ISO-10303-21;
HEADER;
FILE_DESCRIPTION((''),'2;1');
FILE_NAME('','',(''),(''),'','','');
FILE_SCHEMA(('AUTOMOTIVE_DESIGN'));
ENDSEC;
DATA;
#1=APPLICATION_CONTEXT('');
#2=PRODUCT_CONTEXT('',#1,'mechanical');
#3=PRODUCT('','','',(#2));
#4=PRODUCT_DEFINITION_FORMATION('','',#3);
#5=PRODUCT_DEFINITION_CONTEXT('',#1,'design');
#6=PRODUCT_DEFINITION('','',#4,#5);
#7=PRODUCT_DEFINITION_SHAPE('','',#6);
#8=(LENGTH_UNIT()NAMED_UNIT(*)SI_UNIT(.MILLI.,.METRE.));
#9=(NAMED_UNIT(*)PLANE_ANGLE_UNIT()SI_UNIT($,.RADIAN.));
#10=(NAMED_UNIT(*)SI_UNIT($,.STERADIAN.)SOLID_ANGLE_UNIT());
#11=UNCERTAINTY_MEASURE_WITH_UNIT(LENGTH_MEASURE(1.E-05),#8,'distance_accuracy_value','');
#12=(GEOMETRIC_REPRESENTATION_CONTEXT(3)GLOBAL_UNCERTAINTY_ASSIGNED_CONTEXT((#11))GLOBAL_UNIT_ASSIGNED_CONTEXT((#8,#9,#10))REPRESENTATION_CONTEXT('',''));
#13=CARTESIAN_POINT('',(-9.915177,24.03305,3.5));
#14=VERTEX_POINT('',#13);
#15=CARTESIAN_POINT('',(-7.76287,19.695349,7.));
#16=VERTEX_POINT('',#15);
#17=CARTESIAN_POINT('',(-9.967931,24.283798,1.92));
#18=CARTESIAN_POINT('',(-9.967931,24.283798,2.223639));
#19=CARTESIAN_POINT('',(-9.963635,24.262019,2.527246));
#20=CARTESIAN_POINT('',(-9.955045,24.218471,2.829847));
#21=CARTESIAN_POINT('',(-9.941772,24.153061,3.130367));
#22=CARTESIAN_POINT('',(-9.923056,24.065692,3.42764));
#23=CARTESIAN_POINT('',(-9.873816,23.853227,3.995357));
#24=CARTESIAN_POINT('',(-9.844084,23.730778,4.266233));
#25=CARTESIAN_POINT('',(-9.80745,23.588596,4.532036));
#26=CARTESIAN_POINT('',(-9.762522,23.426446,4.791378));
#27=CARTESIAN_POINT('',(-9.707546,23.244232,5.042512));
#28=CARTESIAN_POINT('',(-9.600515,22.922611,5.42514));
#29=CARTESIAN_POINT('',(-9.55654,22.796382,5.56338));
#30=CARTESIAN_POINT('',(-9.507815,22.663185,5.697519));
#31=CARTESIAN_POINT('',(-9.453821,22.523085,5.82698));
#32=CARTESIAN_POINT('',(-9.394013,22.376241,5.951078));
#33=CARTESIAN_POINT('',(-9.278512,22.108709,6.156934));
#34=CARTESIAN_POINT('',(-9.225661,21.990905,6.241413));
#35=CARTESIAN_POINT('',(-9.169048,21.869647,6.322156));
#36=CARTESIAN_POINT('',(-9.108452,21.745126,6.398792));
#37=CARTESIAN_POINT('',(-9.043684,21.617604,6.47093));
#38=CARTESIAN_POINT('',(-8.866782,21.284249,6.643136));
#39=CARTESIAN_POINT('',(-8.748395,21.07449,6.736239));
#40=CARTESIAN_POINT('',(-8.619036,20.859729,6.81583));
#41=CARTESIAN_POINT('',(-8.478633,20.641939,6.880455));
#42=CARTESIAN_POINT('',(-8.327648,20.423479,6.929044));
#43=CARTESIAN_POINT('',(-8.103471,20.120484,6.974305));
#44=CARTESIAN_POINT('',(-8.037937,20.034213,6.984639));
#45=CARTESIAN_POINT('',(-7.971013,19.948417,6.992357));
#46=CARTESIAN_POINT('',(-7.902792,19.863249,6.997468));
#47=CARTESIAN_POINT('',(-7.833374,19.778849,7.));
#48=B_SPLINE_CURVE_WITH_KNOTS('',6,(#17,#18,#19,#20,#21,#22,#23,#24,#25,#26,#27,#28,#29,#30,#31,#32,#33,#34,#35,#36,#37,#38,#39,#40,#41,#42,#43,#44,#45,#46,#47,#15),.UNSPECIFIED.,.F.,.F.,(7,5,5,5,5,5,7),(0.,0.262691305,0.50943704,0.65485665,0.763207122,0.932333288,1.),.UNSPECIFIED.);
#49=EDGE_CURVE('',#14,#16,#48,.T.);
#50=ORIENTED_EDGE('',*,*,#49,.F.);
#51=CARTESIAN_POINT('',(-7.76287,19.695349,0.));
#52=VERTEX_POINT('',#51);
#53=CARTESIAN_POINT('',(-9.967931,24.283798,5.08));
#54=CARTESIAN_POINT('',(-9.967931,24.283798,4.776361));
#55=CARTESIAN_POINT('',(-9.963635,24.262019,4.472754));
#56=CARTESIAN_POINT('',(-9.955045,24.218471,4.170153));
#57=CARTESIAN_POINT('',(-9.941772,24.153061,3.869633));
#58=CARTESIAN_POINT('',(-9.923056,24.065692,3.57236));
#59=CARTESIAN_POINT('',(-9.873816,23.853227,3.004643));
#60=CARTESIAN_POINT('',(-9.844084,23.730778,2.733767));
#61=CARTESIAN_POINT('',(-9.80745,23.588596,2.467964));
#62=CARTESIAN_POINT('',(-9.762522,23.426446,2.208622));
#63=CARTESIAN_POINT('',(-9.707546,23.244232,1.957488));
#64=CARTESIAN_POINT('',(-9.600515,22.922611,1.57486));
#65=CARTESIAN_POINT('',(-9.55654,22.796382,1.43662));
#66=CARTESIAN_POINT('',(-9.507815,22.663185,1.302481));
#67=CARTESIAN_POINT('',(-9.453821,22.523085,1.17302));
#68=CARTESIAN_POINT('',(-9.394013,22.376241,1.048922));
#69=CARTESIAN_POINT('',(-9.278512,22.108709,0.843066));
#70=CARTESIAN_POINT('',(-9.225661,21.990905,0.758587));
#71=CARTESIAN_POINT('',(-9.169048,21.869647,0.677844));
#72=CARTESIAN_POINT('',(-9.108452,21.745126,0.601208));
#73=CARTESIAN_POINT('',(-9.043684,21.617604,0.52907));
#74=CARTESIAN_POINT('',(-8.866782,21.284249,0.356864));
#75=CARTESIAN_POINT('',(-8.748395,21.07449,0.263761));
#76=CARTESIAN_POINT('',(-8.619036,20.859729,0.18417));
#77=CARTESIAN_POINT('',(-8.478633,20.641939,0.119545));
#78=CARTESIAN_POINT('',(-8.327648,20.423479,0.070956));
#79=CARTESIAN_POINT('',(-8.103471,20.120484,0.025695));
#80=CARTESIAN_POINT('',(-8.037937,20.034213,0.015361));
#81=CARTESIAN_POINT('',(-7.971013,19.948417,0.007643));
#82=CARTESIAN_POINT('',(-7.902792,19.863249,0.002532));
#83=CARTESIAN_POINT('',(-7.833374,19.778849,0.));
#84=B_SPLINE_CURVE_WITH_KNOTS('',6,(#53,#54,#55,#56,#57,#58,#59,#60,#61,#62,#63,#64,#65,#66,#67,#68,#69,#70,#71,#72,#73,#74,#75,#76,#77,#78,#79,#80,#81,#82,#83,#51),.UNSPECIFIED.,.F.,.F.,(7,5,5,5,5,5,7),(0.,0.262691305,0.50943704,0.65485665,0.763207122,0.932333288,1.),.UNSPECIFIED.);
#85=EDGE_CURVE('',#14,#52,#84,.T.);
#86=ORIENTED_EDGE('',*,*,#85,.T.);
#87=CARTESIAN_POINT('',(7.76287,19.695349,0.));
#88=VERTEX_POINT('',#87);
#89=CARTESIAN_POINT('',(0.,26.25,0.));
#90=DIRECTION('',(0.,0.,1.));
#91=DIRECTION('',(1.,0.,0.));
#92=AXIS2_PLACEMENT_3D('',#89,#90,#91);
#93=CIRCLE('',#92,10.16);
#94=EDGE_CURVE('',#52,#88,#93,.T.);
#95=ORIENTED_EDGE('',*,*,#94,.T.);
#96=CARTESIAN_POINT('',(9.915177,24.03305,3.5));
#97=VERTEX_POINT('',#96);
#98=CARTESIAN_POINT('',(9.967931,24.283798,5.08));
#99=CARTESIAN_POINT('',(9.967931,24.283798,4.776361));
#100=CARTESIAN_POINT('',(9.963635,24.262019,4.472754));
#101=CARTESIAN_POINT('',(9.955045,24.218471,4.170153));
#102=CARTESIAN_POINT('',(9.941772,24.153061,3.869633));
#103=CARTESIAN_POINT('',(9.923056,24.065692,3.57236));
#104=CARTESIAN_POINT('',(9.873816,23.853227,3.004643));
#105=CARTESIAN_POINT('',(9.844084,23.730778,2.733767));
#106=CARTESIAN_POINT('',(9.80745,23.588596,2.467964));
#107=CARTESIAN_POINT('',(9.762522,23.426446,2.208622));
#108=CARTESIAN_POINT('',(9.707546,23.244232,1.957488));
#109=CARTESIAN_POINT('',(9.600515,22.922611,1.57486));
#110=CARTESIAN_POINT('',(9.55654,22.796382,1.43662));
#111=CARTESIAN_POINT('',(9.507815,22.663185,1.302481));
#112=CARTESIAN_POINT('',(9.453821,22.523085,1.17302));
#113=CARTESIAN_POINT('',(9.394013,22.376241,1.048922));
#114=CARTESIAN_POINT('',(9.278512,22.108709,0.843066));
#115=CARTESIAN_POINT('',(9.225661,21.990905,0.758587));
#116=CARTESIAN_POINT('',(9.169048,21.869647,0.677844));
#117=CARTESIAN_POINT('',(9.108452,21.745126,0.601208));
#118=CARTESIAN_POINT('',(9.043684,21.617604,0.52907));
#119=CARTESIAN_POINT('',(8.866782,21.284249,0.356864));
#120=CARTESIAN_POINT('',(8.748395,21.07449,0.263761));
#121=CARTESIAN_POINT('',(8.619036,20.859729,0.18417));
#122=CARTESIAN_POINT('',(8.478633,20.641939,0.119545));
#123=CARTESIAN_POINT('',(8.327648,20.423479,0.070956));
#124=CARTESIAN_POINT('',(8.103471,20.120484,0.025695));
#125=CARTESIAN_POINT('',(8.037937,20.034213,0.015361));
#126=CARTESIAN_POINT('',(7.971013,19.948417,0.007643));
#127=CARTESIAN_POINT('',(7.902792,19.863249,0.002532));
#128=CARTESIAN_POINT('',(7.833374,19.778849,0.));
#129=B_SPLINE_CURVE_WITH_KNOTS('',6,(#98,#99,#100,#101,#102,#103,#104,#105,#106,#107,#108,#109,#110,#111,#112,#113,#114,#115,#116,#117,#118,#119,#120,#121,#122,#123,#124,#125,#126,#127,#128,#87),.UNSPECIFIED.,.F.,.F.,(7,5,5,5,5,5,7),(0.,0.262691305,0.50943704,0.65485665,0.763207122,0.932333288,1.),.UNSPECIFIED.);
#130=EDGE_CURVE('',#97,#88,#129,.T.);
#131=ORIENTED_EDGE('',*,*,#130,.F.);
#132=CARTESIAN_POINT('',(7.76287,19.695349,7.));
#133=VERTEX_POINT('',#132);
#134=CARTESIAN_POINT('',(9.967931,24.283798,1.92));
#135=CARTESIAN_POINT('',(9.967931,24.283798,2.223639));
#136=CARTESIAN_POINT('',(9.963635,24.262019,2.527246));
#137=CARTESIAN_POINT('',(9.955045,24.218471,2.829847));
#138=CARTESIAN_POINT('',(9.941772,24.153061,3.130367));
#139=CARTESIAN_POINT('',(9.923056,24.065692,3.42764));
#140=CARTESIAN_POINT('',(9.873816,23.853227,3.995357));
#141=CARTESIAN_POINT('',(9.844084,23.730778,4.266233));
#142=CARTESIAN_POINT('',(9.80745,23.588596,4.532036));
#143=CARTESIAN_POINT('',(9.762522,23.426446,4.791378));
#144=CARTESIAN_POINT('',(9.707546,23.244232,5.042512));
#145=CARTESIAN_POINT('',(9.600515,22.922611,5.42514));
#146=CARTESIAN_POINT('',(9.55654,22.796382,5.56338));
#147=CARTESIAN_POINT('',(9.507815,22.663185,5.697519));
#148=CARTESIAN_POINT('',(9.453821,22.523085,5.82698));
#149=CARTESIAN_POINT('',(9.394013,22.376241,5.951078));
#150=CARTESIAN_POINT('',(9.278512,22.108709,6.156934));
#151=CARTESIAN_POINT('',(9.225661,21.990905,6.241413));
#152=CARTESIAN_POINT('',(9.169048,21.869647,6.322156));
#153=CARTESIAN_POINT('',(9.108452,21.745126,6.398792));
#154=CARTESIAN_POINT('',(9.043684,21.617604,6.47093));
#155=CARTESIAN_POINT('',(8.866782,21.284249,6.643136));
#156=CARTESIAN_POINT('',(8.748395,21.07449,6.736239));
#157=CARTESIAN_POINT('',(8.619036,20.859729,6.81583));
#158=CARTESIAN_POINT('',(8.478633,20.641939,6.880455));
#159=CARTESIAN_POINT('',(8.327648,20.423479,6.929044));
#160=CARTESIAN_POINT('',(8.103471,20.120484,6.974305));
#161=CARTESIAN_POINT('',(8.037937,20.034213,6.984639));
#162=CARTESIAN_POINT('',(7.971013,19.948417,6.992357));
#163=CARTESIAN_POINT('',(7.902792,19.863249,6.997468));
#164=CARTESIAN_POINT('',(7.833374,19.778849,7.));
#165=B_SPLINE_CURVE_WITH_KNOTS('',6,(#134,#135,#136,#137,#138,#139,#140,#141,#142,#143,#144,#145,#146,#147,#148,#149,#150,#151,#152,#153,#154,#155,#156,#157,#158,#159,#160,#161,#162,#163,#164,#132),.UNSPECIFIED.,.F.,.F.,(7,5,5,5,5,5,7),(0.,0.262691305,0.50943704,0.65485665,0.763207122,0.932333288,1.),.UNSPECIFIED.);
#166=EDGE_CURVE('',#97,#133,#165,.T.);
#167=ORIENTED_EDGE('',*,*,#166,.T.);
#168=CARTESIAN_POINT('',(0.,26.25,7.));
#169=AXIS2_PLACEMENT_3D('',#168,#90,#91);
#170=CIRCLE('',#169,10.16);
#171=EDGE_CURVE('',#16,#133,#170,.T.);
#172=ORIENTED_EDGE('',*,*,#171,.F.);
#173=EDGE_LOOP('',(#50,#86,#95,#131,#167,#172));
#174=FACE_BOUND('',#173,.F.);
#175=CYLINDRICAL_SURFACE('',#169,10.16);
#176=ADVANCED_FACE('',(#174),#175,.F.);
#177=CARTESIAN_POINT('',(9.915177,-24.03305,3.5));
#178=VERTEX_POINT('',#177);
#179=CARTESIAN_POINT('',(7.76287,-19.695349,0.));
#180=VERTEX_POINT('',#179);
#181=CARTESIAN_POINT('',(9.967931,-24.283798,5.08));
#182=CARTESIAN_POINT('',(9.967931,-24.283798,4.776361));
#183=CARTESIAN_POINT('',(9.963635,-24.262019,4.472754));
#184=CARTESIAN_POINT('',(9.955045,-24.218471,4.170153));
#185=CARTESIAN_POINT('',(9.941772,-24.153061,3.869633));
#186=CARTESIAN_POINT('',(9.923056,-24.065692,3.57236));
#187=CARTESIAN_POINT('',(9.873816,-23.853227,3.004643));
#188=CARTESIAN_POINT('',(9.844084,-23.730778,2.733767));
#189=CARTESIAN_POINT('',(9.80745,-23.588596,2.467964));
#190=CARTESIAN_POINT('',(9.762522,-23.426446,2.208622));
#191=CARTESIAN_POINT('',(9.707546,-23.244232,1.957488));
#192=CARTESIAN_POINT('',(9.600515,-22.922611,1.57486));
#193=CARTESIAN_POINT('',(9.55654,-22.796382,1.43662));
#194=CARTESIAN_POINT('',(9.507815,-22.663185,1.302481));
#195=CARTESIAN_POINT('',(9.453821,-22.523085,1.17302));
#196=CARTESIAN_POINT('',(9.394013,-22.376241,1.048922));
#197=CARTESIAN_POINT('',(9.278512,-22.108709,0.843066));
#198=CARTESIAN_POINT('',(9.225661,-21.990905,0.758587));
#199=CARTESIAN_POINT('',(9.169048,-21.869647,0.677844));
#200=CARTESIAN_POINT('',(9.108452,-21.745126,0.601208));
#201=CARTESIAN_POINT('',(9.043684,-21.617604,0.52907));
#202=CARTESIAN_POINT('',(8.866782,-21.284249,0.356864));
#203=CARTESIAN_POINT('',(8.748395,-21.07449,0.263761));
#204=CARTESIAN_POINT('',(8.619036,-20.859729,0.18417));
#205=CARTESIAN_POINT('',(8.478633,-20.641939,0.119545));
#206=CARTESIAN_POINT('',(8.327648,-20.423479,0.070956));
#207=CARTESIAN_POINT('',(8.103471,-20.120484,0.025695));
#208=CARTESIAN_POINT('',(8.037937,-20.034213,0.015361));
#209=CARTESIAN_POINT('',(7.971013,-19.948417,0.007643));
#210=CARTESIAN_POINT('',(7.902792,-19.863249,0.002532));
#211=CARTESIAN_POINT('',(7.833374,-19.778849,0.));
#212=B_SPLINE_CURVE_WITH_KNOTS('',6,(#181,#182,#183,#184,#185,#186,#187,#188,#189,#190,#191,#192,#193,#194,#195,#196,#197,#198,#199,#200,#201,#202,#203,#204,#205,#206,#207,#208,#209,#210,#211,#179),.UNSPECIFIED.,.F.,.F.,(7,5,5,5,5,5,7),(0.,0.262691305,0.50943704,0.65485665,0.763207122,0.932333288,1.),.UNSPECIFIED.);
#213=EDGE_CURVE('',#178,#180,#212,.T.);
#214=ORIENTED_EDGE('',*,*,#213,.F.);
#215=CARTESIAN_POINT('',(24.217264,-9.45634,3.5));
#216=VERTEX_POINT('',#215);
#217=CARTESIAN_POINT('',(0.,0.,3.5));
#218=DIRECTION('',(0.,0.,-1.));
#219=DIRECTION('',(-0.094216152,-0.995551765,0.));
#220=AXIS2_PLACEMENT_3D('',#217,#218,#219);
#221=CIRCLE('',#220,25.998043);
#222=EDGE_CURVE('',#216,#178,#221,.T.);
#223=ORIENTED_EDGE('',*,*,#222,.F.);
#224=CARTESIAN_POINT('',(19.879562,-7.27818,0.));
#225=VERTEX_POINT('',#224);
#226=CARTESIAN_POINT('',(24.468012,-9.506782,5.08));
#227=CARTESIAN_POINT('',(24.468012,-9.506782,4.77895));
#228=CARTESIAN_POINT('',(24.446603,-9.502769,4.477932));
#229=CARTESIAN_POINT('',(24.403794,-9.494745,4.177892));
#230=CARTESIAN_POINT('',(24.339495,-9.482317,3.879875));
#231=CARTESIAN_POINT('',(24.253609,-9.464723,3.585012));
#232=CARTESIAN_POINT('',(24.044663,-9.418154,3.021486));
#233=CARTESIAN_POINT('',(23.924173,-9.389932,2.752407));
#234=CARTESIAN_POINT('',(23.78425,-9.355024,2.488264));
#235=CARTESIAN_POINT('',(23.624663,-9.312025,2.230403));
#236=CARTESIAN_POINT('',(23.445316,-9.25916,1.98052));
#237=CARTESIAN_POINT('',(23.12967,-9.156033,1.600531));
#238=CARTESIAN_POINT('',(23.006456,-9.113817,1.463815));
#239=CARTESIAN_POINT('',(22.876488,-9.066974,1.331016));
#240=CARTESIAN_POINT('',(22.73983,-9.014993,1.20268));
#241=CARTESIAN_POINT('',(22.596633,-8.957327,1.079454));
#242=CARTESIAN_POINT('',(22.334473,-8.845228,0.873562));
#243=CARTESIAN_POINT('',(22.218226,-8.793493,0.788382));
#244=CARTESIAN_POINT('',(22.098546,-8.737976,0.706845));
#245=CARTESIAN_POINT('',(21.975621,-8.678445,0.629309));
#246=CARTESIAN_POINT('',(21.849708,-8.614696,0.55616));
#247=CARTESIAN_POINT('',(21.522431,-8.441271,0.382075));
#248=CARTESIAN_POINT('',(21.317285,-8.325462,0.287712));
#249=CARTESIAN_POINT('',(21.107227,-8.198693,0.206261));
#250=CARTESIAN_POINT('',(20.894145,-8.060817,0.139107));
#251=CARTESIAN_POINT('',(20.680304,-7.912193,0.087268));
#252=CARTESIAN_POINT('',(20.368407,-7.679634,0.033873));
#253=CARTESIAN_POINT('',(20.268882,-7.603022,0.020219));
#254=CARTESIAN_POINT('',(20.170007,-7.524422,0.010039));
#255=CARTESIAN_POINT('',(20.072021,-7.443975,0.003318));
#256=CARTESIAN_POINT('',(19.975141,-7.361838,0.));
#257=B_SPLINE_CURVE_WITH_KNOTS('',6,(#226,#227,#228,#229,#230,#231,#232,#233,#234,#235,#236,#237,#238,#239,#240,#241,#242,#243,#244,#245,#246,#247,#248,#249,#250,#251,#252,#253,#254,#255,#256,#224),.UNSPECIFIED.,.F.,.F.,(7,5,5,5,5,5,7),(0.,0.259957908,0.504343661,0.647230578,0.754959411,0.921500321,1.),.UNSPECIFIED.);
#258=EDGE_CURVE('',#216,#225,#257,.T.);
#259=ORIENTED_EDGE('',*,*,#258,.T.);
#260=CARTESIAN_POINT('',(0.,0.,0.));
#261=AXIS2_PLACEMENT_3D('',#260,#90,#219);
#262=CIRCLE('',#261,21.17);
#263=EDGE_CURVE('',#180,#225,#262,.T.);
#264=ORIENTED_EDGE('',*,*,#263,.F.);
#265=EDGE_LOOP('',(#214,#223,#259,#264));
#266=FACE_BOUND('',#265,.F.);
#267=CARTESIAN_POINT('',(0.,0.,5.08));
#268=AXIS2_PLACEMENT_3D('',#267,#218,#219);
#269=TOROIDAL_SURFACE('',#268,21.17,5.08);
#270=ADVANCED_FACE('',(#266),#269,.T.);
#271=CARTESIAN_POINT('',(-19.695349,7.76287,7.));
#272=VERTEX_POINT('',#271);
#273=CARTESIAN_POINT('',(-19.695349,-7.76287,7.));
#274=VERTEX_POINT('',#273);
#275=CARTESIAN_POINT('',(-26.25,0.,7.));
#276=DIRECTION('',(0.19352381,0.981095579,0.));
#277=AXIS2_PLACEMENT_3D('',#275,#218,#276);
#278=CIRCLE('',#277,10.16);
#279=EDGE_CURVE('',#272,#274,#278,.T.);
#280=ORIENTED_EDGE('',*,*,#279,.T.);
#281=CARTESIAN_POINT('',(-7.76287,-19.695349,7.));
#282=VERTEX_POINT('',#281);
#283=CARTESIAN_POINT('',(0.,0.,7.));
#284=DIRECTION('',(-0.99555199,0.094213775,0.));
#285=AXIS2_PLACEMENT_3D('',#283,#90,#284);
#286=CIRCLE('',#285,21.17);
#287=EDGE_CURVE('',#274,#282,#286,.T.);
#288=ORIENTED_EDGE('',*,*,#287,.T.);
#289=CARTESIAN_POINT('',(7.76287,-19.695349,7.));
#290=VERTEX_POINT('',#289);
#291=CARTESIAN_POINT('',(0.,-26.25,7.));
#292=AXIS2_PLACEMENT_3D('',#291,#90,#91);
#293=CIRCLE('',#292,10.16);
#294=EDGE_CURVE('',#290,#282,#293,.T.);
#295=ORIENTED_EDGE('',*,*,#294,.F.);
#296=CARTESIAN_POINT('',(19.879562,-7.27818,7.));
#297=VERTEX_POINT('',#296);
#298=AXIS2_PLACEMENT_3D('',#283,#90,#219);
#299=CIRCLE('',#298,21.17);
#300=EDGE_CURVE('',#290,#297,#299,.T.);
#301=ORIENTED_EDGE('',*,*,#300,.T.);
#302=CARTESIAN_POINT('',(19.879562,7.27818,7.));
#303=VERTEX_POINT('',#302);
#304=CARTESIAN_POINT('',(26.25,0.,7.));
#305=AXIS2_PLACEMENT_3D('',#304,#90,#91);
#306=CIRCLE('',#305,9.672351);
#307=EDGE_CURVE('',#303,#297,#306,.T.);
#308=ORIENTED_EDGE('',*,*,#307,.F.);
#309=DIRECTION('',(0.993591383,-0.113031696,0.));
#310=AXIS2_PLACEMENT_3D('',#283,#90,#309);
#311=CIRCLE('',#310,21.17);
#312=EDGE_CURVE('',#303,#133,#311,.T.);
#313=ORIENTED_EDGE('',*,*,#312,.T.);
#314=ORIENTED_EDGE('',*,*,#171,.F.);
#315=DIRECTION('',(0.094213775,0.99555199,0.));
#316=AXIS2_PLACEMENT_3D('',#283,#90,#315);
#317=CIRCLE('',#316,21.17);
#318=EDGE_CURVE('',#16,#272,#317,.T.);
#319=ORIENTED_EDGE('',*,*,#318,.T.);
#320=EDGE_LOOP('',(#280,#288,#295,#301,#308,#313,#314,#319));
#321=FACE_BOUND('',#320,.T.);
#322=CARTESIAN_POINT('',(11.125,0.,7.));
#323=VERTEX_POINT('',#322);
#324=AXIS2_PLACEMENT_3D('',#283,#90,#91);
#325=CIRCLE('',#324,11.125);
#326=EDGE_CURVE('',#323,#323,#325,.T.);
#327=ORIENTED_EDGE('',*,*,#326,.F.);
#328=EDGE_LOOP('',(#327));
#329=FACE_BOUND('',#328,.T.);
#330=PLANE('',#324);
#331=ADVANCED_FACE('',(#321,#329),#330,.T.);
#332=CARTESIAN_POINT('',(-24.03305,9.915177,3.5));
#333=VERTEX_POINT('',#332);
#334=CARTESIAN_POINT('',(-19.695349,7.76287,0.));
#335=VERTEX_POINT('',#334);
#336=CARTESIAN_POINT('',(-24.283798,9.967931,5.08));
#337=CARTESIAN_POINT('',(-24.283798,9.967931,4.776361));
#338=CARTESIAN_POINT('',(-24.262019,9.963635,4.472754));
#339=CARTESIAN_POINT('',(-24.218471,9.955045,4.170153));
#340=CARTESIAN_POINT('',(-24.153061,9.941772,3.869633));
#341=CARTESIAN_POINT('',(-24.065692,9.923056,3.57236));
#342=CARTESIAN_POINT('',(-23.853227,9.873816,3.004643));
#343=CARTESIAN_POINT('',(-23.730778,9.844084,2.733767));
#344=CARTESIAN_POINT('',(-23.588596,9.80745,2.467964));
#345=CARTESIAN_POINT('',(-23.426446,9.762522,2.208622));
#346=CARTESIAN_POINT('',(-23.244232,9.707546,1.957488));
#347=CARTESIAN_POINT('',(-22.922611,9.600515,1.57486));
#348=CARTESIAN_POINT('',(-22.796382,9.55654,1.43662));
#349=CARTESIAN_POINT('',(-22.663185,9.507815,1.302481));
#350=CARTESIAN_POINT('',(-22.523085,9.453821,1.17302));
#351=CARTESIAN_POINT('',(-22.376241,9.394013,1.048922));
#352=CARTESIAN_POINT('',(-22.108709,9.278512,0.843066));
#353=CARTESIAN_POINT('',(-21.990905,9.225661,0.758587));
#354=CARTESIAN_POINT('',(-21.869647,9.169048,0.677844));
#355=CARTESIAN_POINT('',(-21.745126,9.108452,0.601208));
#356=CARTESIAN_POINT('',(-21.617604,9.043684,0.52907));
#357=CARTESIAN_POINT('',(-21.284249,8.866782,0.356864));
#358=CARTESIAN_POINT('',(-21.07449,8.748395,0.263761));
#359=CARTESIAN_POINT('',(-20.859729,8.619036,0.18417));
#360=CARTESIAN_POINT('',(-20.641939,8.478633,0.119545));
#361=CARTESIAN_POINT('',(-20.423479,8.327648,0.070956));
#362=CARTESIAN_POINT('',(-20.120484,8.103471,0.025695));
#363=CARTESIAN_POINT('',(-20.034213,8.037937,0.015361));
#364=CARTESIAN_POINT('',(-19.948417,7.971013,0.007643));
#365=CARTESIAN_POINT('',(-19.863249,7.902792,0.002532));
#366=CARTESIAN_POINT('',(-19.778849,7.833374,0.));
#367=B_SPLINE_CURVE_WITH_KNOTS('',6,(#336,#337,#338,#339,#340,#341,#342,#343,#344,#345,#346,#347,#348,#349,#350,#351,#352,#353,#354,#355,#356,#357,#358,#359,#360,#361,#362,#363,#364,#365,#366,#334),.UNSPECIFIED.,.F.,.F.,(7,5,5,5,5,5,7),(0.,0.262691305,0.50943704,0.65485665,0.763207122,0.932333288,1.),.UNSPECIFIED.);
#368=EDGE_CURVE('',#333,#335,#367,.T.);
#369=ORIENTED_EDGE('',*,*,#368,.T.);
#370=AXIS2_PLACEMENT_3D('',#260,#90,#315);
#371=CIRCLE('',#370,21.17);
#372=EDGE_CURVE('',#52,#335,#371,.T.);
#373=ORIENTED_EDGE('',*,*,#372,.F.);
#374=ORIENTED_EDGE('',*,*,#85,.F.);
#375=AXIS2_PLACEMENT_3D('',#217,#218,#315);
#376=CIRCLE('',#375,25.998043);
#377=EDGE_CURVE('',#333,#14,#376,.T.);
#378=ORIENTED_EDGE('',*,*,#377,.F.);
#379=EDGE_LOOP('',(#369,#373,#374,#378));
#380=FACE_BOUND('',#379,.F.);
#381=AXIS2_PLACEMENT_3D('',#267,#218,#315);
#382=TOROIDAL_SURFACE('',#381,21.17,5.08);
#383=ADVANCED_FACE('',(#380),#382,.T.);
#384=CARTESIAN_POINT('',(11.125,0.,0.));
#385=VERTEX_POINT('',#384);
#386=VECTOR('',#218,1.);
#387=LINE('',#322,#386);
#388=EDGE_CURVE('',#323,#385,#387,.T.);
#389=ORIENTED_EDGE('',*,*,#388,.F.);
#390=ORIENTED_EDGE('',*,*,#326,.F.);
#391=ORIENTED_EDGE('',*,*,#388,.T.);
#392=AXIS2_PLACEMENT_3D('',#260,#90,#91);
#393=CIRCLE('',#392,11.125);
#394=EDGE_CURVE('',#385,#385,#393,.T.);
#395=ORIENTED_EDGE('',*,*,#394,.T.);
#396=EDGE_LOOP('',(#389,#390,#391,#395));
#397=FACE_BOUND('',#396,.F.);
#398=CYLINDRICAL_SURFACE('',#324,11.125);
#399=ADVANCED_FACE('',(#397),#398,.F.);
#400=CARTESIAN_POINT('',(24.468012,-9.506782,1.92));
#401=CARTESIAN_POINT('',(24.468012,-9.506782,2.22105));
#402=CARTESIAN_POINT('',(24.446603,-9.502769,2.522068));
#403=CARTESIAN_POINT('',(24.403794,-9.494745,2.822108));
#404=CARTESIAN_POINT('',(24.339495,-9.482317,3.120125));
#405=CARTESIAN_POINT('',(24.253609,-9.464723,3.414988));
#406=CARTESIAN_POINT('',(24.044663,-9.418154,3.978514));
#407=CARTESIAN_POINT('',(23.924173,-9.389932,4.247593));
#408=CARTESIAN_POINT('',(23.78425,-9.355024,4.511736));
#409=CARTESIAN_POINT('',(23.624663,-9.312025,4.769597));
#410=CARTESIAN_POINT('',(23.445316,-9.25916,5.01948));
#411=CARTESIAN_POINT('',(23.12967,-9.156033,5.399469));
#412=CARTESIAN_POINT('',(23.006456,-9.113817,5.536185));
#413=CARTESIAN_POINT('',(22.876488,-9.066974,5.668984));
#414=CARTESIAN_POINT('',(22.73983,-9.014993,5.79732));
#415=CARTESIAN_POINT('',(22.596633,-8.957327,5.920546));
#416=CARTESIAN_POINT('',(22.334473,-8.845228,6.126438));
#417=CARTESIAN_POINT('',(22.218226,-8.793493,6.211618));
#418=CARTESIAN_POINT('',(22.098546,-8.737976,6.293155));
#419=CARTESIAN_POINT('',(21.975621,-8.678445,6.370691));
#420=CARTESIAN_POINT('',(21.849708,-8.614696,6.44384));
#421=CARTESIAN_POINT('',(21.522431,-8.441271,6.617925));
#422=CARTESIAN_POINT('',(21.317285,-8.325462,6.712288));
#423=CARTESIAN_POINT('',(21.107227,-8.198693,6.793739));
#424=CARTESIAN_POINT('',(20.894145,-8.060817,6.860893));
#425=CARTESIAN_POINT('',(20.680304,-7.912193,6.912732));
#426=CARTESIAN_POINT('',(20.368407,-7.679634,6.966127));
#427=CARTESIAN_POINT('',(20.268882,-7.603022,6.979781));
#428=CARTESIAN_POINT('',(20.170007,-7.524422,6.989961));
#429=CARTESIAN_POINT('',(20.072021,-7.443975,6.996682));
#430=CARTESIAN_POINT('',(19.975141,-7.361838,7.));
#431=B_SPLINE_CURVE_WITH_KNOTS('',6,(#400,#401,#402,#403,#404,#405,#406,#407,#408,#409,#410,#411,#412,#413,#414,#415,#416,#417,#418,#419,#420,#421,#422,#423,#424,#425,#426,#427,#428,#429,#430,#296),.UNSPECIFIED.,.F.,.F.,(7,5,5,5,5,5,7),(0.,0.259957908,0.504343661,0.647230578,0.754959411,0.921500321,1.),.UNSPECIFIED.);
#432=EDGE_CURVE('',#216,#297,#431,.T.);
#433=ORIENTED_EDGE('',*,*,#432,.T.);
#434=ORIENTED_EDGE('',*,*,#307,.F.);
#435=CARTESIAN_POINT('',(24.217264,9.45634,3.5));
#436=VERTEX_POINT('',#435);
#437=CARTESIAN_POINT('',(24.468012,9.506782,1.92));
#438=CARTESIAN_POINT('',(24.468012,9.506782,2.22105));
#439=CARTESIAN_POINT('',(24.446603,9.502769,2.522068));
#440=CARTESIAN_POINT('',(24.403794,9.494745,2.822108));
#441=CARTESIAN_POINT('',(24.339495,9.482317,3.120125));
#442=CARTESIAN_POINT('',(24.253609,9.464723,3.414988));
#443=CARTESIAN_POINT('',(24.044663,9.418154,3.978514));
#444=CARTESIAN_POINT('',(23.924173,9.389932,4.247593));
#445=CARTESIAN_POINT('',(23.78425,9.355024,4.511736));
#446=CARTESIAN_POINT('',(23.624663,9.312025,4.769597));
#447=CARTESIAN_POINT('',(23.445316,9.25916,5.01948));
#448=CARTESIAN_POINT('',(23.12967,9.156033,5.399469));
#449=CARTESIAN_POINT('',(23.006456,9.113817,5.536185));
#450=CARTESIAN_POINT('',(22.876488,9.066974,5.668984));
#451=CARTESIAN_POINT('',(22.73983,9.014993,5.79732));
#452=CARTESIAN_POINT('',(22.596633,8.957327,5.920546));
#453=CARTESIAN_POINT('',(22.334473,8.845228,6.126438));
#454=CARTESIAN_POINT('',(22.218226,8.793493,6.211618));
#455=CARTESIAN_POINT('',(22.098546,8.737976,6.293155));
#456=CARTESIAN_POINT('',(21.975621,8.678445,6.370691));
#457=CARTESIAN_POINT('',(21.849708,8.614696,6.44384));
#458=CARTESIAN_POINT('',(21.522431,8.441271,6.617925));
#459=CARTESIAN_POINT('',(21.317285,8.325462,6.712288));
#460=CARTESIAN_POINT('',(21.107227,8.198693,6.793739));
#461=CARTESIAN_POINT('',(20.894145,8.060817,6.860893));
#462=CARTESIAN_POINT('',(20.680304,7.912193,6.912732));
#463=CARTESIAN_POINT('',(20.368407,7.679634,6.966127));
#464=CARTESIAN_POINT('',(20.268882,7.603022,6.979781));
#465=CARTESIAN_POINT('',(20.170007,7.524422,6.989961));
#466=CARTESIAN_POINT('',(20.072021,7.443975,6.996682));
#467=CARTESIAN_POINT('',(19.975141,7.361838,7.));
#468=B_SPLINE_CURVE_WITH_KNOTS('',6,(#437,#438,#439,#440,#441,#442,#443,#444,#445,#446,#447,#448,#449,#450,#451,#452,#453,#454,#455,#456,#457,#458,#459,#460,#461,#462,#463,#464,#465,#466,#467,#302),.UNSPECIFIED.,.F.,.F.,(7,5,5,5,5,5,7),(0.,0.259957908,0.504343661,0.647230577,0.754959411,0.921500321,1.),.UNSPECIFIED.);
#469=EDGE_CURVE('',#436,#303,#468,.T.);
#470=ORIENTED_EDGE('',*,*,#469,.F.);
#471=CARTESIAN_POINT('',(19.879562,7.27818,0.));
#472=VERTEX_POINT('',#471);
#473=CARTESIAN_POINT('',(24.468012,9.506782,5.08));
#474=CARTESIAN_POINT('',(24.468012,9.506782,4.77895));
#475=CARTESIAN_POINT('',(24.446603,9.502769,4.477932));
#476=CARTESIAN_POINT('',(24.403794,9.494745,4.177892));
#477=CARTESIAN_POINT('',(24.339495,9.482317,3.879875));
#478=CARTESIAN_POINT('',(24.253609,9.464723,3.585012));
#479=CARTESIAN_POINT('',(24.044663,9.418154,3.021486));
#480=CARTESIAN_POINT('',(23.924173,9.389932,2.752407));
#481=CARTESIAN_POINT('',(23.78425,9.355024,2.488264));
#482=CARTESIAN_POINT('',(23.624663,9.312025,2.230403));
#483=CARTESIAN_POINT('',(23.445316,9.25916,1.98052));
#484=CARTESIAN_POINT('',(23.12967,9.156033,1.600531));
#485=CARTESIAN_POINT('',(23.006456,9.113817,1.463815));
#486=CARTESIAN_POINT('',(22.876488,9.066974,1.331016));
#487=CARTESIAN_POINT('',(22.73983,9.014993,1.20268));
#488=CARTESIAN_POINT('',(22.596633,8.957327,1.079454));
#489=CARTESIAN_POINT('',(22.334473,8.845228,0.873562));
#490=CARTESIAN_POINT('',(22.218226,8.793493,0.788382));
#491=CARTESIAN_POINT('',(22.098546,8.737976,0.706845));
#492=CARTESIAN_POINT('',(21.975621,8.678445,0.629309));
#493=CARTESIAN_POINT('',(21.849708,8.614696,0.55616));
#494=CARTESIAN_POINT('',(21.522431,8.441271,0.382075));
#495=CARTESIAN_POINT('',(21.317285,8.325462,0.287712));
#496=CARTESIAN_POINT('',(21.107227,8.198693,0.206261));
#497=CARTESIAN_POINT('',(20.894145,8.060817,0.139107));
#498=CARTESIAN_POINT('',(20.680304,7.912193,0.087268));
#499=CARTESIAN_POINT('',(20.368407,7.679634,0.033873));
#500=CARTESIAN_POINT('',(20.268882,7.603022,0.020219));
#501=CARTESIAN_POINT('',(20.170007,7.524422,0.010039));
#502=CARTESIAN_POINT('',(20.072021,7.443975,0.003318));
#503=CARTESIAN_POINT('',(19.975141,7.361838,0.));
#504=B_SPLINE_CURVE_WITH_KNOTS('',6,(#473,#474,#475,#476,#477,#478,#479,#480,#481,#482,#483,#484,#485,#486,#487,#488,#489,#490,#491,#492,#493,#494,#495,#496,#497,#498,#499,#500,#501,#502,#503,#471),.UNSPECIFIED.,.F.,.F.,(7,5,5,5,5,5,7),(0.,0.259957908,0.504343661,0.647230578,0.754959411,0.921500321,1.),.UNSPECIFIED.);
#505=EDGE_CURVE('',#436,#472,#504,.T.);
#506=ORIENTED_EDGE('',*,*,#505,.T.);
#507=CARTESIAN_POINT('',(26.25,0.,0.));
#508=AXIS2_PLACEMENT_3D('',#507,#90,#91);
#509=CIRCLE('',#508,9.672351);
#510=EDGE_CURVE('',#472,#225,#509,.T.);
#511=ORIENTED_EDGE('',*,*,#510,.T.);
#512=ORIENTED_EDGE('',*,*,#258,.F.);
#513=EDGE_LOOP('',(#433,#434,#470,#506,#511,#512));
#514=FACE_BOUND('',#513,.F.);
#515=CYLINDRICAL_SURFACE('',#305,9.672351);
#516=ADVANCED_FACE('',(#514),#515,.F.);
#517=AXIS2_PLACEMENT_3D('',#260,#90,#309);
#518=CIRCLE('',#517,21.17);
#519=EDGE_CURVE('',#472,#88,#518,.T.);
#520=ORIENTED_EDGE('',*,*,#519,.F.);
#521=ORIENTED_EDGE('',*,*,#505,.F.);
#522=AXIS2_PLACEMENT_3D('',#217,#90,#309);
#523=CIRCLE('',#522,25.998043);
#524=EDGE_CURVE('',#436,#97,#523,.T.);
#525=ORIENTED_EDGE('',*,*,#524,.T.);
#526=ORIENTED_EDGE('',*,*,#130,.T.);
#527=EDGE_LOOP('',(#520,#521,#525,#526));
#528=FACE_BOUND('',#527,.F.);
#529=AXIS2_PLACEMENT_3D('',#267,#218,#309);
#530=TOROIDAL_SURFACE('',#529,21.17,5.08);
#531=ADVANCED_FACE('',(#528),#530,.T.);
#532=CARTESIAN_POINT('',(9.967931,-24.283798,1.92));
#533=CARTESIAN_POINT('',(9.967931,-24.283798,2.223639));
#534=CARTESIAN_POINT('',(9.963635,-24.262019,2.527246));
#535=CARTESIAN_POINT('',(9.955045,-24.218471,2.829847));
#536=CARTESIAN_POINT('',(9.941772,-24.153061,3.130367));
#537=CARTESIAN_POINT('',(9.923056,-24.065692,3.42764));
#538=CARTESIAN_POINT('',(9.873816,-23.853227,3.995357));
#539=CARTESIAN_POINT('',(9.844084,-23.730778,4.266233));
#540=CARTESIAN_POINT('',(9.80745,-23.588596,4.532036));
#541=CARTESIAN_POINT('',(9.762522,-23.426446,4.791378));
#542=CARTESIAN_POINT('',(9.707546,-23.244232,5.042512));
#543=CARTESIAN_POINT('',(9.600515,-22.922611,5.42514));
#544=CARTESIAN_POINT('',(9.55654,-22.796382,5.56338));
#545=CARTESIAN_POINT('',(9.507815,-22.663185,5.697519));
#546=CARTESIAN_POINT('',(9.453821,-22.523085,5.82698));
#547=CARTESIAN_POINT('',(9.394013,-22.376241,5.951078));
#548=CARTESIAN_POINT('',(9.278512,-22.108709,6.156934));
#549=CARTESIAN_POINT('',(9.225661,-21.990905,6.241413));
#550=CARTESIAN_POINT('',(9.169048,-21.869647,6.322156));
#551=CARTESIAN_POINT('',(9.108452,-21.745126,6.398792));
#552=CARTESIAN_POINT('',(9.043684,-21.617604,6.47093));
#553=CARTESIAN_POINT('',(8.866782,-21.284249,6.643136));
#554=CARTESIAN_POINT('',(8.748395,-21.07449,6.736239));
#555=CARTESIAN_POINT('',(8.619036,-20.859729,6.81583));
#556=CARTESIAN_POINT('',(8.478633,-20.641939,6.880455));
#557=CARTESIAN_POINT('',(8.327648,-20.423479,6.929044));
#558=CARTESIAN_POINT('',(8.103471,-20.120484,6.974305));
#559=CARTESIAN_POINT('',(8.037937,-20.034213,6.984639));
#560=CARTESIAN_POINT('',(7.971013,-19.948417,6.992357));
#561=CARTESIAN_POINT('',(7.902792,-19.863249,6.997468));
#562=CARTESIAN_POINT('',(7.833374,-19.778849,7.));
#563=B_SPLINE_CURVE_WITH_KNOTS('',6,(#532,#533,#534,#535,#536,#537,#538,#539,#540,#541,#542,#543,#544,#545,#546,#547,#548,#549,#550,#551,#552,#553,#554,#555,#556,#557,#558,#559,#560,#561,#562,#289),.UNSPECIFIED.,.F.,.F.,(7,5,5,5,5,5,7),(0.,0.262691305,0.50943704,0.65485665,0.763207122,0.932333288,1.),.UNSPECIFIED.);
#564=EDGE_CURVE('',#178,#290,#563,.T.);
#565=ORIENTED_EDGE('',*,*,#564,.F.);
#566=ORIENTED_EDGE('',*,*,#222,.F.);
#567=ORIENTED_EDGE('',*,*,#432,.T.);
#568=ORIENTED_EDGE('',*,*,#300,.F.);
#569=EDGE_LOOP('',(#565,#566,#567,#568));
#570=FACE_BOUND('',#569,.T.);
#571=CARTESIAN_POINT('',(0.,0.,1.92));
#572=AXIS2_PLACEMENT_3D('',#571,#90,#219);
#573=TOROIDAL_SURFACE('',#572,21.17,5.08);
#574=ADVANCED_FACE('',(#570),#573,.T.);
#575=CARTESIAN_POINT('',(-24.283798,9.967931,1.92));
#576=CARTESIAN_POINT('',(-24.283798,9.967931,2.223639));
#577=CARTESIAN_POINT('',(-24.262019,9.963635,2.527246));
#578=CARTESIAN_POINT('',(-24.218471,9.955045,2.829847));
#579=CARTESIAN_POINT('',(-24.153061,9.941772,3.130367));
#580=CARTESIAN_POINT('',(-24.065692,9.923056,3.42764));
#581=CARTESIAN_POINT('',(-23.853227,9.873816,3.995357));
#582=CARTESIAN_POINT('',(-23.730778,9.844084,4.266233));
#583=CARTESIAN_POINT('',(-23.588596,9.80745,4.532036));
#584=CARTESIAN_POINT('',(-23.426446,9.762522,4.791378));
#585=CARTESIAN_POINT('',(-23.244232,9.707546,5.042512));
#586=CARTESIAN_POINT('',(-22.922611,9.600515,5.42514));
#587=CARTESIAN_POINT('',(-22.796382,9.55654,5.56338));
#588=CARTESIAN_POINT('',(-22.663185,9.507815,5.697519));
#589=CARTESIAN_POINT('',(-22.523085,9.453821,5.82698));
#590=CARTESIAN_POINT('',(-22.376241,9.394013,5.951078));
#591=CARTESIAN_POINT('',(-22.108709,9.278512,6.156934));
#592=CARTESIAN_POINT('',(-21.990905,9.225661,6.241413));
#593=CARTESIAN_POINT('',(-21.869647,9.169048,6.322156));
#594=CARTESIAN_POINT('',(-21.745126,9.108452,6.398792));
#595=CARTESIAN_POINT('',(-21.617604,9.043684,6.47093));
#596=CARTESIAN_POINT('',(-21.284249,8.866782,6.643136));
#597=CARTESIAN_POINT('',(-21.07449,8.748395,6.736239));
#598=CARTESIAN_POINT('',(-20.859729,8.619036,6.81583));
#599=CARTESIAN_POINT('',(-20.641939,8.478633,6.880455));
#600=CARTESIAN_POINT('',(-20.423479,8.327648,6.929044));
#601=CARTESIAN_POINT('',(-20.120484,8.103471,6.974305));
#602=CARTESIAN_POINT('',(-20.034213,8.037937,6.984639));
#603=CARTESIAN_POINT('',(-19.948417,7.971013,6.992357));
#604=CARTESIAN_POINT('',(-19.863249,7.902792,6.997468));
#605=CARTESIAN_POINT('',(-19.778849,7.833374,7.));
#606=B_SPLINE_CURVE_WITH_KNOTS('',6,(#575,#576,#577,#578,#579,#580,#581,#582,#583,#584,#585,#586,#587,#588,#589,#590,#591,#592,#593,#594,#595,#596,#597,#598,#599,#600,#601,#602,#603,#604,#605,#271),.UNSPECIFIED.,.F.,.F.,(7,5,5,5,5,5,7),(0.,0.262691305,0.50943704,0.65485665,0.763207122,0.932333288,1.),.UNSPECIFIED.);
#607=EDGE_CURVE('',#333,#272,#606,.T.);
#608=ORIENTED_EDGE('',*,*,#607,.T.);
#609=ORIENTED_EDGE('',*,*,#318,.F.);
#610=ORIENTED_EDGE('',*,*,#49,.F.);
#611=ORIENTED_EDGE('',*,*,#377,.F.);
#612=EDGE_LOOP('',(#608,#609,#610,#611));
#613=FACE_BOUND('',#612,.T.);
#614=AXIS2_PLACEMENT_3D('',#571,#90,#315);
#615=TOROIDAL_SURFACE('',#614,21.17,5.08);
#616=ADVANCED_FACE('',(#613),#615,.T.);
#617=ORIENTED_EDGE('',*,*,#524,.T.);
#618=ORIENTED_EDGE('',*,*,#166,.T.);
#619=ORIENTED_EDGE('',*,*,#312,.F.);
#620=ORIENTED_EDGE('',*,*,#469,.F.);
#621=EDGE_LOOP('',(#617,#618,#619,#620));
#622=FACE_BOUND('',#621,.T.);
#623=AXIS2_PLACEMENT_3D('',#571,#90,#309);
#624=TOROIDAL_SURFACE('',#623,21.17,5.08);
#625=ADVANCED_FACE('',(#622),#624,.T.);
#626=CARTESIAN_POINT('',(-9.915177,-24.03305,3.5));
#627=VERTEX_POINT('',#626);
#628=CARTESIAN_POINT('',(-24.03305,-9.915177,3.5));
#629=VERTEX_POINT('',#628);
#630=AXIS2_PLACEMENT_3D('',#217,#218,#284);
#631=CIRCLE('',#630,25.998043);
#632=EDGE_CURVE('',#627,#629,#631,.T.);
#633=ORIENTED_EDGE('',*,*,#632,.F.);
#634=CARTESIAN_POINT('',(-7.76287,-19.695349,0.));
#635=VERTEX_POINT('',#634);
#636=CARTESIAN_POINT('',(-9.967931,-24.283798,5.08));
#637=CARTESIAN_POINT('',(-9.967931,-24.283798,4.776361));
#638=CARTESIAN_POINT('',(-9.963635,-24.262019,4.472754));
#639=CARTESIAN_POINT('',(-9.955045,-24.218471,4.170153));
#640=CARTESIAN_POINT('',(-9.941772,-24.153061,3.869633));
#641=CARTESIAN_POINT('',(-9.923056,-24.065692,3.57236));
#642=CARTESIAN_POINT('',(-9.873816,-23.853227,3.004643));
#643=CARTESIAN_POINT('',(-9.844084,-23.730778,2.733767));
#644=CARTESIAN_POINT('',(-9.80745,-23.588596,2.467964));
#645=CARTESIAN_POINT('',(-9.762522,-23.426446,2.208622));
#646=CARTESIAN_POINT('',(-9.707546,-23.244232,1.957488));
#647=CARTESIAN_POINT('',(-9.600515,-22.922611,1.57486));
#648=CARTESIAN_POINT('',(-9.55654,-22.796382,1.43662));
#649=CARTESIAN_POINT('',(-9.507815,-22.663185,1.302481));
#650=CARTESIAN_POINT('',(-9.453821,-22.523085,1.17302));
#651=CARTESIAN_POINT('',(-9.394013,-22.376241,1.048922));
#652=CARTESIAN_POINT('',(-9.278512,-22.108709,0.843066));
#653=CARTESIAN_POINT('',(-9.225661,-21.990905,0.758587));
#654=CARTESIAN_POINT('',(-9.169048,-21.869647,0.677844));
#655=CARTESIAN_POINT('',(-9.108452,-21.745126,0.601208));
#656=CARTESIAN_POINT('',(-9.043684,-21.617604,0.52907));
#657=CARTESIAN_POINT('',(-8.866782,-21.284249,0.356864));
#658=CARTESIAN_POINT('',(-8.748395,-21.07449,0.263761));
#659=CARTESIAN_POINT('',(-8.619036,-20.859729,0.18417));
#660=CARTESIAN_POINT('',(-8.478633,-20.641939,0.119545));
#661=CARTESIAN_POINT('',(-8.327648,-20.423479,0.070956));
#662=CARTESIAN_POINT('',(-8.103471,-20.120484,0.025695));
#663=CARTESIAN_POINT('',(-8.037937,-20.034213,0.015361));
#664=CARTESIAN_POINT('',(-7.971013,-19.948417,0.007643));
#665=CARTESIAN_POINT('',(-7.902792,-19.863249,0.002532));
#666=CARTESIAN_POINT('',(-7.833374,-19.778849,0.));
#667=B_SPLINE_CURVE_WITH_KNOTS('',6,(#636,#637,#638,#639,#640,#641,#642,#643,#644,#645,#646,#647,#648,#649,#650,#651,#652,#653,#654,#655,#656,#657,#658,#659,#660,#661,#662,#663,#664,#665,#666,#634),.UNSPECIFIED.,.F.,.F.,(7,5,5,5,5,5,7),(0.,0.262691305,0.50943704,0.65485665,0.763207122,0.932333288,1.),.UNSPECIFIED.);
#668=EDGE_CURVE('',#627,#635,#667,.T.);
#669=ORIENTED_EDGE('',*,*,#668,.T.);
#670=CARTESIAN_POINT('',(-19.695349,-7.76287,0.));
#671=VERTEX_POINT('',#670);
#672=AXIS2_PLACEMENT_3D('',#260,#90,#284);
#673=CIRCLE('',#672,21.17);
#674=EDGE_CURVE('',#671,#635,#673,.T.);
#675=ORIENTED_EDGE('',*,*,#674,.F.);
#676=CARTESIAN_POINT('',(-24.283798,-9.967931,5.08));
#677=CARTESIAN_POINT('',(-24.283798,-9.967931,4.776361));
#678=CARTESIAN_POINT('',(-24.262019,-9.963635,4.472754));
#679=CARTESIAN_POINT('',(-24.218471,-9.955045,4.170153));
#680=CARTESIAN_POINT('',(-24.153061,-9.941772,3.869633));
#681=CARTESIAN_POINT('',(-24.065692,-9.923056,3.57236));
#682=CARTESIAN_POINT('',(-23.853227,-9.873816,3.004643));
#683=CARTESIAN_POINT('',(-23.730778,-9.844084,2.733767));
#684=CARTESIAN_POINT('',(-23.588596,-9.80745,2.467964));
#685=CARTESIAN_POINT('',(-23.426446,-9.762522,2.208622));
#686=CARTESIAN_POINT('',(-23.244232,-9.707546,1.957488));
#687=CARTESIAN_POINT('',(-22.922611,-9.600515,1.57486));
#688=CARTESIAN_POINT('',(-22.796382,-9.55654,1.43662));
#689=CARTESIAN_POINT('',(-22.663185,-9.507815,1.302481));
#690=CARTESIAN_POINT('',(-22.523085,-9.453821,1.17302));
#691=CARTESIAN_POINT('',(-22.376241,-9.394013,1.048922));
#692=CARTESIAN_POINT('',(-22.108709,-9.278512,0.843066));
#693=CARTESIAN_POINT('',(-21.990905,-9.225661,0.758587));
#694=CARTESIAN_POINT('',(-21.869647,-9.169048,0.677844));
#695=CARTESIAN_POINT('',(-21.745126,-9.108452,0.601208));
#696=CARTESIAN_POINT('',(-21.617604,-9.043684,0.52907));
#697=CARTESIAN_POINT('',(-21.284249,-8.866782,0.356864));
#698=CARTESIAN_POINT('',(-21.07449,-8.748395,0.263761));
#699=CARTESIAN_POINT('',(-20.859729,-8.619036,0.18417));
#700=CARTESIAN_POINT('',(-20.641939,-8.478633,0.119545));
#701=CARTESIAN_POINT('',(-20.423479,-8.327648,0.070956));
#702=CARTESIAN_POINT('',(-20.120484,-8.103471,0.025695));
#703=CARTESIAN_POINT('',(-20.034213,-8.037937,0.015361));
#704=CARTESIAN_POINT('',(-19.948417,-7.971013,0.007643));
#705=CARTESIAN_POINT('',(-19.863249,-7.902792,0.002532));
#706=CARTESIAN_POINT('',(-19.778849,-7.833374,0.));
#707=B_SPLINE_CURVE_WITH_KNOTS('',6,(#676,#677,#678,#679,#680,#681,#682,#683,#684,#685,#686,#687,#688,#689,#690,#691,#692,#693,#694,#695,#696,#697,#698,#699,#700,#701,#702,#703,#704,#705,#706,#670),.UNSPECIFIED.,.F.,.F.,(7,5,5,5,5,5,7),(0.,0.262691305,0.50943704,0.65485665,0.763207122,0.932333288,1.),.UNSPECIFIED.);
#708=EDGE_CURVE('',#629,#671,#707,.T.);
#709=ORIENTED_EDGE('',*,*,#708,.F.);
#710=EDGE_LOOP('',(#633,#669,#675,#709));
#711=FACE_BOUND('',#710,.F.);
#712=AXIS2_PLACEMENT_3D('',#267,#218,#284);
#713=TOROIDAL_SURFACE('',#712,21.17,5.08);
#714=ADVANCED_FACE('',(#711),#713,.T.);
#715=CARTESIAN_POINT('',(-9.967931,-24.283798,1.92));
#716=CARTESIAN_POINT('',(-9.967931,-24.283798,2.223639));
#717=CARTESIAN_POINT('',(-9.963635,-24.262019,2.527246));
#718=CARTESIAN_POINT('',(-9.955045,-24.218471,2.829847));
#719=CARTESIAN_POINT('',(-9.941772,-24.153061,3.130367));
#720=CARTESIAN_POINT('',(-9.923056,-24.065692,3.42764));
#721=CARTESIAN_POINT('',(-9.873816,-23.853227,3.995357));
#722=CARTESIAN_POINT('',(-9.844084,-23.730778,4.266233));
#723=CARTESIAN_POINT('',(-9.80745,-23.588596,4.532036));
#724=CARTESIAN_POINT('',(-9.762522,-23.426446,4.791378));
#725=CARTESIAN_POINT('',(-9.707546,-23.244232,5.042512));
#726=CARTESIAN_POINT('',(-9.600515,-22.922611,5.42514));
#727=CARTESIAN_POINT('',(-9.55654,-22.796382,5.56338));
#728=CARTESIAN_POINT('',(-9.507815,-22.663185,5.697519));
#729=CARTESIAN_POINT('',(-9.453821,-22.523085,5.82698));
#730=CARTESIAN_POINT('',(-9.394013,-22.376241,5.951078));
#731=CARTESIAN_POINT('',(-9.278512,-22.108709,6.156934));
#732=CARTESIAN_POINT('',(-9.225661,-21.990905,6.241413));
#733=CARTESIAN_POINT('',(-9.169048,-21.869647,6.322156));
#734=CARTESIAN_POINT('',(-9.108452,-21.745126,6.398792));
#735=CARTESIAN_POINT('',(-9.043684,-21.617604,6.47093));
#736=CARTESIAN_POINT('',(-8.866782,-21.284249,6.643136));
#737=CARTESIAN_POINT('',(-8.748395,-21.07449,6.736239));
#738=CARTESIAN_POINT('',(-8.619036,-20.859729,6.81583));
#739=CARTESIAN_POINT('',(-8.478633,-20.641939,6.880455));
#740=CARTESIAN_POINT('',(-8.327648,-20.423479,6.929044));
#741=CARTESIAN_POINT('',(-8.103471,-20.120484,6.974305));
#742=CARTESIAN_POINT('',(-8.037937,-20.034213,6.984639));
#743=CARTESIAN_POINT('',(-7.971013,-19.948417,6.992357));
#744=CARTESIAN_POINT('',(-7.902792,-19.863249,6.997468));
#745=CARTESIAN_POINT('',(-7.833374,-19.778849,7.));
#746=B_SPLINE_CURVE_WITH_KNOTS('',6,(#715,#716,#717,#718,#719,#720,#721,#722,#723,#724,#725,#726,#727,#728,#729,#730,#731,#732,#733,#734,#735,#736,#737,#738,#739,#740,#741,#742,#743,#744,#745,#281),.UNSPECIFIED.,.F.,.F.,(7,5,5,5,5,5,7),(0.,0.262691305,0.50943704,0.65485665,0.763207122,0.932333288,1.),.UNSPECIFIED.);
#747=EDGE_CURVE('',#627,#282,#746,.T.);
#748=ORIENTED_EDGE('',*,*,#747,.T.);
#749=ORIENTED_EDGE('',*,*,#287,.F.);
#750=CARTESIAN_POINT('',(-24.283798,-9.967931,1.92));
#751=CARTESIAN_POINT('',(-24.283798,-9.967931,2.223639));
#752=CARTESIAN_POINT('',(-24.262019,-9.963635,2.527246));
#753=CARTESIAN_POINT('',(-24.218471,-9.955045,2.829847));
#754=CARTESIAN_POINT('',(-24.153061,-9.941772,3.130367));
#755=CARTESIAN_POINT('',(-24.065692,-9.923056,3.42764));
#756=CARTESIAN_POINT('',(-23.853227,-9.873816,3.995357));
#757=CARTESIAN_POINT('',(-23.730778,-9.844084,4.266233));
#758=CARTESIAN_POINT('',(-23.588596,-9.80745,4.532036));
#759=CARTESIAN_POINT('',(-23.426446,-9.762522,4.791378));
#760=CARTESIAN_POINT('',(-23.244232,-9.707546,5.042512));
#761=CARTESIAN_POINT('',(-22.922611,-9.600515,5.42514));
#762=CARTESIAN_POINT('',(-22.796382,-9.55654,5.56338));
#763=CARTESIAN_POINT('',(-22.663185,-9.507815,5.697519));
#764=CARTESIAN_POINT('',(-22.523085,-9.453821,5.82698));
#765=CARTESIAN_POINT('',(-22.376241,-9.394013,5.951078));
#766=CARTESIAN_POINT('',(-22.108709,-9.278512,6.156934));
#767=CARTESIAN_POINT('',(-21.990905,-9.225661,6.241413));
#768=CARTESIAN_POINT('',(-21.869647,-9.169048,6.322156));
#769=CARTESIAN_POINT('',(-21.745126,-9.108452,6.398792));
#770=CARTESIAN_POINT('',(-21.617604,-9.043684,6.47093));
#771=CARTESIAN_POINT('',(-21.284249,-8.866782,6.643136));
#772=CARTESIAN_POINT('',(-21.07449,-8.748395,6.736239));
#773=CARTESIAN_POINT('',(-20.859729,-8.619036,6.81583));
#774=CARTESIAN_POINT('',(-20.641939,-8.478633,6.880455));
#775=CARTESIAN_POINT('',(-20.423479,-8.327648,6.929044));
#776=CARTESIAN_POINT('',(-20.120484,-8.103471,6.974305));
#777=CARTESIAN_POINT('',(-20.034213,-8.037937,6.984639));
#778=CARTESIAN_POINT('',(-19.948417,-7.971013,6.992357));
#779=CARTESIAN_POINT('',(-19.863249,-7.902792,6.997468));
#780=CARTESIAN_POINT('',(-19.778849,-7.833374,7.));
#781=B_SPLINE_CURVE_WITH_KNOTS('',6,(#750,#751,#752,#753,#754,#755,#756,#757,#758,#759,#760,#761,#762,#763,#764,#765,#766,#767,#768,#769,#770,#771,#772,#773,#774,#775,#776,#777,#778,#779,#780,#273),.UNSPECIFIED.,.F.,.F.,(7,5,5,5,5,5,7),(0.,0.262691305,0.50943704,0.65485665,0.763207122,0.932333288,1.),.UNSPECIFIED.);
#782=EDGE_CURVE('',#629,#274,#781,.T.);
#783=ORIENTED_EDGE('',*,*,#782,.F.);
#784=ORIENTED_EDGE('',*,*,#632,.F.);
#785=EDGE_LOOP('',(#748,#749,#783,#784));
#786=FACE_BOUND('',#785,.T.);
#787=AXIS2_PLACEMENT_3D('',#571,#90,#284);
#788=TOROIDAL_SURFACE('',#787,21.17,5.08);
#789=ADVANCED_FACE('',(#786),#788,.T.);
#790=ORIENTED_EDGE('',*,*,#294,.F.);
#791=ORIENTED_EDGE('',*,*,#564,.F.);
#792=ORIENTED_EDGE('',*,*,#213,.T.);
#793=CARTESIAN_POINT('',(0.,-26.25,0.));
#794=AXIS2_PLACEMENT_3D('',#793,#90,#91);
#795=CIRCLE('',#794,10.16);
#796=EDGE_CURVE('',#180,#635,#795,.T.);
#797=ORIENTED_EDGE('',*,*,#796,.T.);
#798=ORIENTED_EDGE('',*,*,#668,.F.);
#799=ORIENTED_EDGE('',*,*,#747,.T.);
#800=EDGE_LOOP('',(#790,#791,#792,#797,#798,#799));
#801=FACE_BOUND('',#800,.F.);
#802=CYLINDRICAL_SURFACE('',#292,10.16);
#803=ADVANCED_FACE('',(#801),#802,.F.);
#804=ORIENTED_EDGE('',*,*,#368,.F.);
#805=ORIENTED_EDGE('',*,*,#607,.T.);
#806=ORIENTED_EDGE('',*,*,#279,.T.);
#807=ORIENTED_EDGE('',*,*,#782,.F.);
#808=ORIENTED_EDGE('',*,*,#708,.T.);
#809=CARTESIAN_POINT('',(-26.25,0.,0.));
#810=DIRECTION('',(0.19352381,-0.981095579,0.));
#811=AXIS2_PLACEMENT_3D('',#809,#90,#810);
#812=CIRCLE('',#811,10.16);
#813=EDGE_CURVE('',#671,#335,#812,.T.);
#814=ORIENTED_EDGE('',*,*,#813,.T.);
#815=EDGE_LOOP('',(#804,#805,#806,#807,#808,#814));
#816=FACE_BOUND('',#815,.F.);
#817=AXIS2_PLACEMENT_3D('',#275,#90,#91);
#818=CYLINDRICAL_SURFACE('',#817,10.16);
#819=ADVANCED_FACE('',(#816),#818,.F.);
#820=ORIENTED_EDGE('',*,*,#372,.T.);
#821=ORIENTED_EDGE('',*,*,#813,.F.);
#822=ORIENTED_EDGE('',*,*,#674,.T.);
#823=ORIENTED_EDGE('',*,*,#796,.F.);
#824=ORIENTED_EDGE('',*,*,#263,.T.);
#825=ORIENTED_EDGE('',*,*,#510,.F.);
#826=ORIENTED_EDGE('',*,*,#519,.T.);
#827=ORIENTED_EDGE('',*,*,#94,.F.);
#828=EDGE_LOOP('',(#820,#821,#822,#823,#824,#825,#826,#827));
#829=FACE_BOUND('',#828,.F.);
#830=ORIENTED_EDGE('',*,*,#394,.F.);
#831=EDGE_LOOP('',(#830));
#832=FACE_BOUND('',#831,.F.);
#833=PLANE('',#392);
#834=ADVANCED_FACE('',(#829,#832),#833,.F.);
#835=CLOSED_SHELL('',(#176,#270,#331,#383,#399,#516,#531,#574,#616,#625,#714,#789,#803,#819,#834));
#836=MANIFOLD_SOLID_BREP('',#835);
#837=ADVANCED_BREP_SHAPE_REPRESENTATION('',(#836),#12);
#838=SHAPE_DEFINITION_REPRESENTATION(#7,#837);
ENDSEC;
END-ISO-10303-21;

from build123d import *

# Parameters (mm, degrees)
F0_R         = 26.25
F1_DEPTH     = 7
F2_R         = 11.125
F3_DEPTH     = 25.4
F4_R         = 10.16
F4_R_2       = 9.6723514766
F5_DEPTH     = 25.4
F6_T2_ANGLE  = 101.8963155292
F6_T4_ANGLE  = 100.8121389037
F6_T6_ANGLE  = 100.8121389037
F6_T8_ANGLE  = 100.8121389037
F6_T10_ANGLE = 100.8121389037
F6_T12_ANGLE = 101.8963155292
F6_T14_ANGLE = 101.8963155292
F6_T16_ANGLE = 101.8963155292


# Not quite as in the source:
# - a fillet or chamfer that OpenCascade refuses, or shapes differently, is made with other operations: its cross-section is extruded or revolved along the edge and cut away or added


with BuildPart() as f1:
    # F0 (on Top) → F1 (new body)
    with BuildSketch(Plane.XY):
        Circle(F0_R)
    extrude(amount=F1_DEPTH)

    # F2 (on face) → F3 (cut)
    with BuildSketch(Plane.XY.offset(7)):
        Circle(F2_R)
    extrude(amount=-F3_DEPTH, mode=Mode.SUBTRACT)

    # F4 (on face) → F5 (cut)
    with BuildSketch(Plane.XY.offset(7)):
        with Locations((0, -26.25)):
            Circle(F4_R)
        with Locations((-26.25, 0)):
            Circle(F4_R)
        with Locations((0, 26.25)):
            Circle(F4_R)
        with Locations((26.25, 0)):
            Circle(F4_R_2)
    extrude(amount=-F5_DEPTH, mode=Mode.SUBTRACT)

    # F6: fillet of radius 5.08 on 8 edges, made by hand

    # F6_s1 → F6_t2 (revolve, cut)
    with BuildSketch(Plane(origin=(0, 0, 0), x_dir=(0, 0, 1), z_dir=(-0.995551765, 0.0942161515, 0))):
        with BuildLine():
            ThreePointArc((5.08, -26.25), (1.4878975516, -24.7621024484), (0, -21.17))
            Line((0, -21.17), (0, -26.25))
            Line((0, -26.25), (5.08, -26.25))
        make_face()
    revolve(axis=Axis((0, 0, 0), (0, 0, 1)), revolution_arc=F6_T2_ANGLE, mode=Mode.SUBTRACT)

    # F6_s3 → F6_t4 (revolve, cut)
    with BuildSketch(Plane(origin=(0, 0, 0), x_dir=(0, 0, 1), z_dir=(0.0942137746, 0.9955519899, 0))):
        with BuildLine():
            ThreePointArc((5.08, -26.25), (1.4878975516, -24.7621024484), (0, -21.17))
            Line((0, -21.17), (0, -26.25))
            Line((0, -26.25), (5.08, -26.25))
        make_face()
    revolve(axis=Axis((0, 0, 0), (0, 0, 1)), revolution_arc=F6_T4_ANGLE, mode=Mode.SUBTRACT)

    # F6_s5 → F6_t6 (revolve, cut)
    with BuildSketch(Plane(origin=(0, 0, 0), x_dir=(0, 0, 1), z_dir=(0.9955519899, -0.0942137746, 0))):
        with BuildLine():
            ThreePointArc((5.08, -26.25), (1.4878975516, -24.7621024484), (0, -21.17))
            Line((0, -21.17), (0, -26.25))
            Line((0, -26.25), (5.08, -26.25))
        make_face()
    revolve(axis=Axis((0, 0, 0), (0, 0, 1)), revolution_arc=F6_T6_ANGLE, mode=Mode.SUBTRACT)

    # F6_s7 → F6_t8 (revolve, cut)
    with BuildSketch(Plane(origin=(0, 0, 0), x_dir=(0, 0, 1), z_dir=(0.9955519899, -0.0942137746, 0))):
        with BuildLine():
            ThreePointArc((1.92, -26.25), (5.5121024484, -24.7621024484), (7, -21.17))
            Line((7, -21.17), (7, -26.25))
            Line((7, -26.25), (1.92, -26.25))
        make_face()
    revolve(axis=Axis((0, 0, 7), (0, 0, 1)), revolution_arc=F6_T8_ANGLE, mode=Mode.SUBTRACT)

    # F6_s9 → F6_t10 (revolve, cut)
    with BuildSketch(Plane(origin=(0, 0, 0), x_dir=(0, 0, 1), z_dir=(0.0942137746, 0.9955519899, 0))):
        with BuildLine():
            ThreePointArc((1.92, -26.25), (5.5121024484, -24.7621024484), (7, -21.17))
            Line((7, -21.17), (7, -26.25))
            Line((7, -26.25), (1.92, -26.25))
        make_face()
    revolve(axis=Axis((0, 0, 7), (0, 0, 1)), revolution_arc=F6_T10_ANGLE, mode=Mode.SUBTRACT)

    # F6_s11 → F6_t12 (revolve, cut)
    with BuildSketch(Plane(origin=(0, 0, 0), x_dir=(0, 0, 1), z_dir=(-0.995551765, 0.0942161515, 0))):
        with BuildLine():
            ThreePointArc((1.92, -26.25), (5.5121024484, -24.7621024484), (7, -21.17))
            Line((7, -21.17), (7, -26.25))
            Line((7, -26.25), (1.92, -26.25))
        make_face()
    revolve(axis=Axis((0, 0, 7), (0, 0, 1)), revolution_arc=F6_T12_ANGLE, mode=Mode.SUBTRACT)

    # F6_s13 → F6_t14 (revolve, cut)
    with BuildSketch(Plane(origin=(0, 0, 0), x_dir=(0, 0, 1), z_dir=(-0.1130316961, -0.9935913826, 0))):
        with BuildLine():
            ThreePointArc((1.92, -26.25), (5.5121024484, -24.7621024484), (7, -21.17))
            Line((7, -21.17), (7, -26.25))
            Line((7, -26.25), (1.92, -26.25))
        make_face()
    revolve(axis=Axis((0, 0, 7), (0, 0, 1)), revolution_arc=F6_T14_ANGLE, mode=Mode.SUBTRACT)

    # F6_s15 → F6_t16 (revolve, cut)
    with BuildSketch(Plane(origin=(0, 0, 0), x_dir=(0, 0, 1), z_dir=(-0.1130316961, -0.9935913826, 0))):
        with BuildLine():
            ThreePointArc((5.08, -26.25), (1.4878975516, -24.7621024484), (0, -21.17))
            Line((0, -21.17), (0, -26.25))
            Line((0, -26.25), (5.08, -26.25))
        make_face()
    revolve(axis=Axis((0, 0, 0), (0, 0, 1)), revolution_arc=F6_T16_ANGLE, mode=Mode.SUBTRACT)


solid = f1.part
